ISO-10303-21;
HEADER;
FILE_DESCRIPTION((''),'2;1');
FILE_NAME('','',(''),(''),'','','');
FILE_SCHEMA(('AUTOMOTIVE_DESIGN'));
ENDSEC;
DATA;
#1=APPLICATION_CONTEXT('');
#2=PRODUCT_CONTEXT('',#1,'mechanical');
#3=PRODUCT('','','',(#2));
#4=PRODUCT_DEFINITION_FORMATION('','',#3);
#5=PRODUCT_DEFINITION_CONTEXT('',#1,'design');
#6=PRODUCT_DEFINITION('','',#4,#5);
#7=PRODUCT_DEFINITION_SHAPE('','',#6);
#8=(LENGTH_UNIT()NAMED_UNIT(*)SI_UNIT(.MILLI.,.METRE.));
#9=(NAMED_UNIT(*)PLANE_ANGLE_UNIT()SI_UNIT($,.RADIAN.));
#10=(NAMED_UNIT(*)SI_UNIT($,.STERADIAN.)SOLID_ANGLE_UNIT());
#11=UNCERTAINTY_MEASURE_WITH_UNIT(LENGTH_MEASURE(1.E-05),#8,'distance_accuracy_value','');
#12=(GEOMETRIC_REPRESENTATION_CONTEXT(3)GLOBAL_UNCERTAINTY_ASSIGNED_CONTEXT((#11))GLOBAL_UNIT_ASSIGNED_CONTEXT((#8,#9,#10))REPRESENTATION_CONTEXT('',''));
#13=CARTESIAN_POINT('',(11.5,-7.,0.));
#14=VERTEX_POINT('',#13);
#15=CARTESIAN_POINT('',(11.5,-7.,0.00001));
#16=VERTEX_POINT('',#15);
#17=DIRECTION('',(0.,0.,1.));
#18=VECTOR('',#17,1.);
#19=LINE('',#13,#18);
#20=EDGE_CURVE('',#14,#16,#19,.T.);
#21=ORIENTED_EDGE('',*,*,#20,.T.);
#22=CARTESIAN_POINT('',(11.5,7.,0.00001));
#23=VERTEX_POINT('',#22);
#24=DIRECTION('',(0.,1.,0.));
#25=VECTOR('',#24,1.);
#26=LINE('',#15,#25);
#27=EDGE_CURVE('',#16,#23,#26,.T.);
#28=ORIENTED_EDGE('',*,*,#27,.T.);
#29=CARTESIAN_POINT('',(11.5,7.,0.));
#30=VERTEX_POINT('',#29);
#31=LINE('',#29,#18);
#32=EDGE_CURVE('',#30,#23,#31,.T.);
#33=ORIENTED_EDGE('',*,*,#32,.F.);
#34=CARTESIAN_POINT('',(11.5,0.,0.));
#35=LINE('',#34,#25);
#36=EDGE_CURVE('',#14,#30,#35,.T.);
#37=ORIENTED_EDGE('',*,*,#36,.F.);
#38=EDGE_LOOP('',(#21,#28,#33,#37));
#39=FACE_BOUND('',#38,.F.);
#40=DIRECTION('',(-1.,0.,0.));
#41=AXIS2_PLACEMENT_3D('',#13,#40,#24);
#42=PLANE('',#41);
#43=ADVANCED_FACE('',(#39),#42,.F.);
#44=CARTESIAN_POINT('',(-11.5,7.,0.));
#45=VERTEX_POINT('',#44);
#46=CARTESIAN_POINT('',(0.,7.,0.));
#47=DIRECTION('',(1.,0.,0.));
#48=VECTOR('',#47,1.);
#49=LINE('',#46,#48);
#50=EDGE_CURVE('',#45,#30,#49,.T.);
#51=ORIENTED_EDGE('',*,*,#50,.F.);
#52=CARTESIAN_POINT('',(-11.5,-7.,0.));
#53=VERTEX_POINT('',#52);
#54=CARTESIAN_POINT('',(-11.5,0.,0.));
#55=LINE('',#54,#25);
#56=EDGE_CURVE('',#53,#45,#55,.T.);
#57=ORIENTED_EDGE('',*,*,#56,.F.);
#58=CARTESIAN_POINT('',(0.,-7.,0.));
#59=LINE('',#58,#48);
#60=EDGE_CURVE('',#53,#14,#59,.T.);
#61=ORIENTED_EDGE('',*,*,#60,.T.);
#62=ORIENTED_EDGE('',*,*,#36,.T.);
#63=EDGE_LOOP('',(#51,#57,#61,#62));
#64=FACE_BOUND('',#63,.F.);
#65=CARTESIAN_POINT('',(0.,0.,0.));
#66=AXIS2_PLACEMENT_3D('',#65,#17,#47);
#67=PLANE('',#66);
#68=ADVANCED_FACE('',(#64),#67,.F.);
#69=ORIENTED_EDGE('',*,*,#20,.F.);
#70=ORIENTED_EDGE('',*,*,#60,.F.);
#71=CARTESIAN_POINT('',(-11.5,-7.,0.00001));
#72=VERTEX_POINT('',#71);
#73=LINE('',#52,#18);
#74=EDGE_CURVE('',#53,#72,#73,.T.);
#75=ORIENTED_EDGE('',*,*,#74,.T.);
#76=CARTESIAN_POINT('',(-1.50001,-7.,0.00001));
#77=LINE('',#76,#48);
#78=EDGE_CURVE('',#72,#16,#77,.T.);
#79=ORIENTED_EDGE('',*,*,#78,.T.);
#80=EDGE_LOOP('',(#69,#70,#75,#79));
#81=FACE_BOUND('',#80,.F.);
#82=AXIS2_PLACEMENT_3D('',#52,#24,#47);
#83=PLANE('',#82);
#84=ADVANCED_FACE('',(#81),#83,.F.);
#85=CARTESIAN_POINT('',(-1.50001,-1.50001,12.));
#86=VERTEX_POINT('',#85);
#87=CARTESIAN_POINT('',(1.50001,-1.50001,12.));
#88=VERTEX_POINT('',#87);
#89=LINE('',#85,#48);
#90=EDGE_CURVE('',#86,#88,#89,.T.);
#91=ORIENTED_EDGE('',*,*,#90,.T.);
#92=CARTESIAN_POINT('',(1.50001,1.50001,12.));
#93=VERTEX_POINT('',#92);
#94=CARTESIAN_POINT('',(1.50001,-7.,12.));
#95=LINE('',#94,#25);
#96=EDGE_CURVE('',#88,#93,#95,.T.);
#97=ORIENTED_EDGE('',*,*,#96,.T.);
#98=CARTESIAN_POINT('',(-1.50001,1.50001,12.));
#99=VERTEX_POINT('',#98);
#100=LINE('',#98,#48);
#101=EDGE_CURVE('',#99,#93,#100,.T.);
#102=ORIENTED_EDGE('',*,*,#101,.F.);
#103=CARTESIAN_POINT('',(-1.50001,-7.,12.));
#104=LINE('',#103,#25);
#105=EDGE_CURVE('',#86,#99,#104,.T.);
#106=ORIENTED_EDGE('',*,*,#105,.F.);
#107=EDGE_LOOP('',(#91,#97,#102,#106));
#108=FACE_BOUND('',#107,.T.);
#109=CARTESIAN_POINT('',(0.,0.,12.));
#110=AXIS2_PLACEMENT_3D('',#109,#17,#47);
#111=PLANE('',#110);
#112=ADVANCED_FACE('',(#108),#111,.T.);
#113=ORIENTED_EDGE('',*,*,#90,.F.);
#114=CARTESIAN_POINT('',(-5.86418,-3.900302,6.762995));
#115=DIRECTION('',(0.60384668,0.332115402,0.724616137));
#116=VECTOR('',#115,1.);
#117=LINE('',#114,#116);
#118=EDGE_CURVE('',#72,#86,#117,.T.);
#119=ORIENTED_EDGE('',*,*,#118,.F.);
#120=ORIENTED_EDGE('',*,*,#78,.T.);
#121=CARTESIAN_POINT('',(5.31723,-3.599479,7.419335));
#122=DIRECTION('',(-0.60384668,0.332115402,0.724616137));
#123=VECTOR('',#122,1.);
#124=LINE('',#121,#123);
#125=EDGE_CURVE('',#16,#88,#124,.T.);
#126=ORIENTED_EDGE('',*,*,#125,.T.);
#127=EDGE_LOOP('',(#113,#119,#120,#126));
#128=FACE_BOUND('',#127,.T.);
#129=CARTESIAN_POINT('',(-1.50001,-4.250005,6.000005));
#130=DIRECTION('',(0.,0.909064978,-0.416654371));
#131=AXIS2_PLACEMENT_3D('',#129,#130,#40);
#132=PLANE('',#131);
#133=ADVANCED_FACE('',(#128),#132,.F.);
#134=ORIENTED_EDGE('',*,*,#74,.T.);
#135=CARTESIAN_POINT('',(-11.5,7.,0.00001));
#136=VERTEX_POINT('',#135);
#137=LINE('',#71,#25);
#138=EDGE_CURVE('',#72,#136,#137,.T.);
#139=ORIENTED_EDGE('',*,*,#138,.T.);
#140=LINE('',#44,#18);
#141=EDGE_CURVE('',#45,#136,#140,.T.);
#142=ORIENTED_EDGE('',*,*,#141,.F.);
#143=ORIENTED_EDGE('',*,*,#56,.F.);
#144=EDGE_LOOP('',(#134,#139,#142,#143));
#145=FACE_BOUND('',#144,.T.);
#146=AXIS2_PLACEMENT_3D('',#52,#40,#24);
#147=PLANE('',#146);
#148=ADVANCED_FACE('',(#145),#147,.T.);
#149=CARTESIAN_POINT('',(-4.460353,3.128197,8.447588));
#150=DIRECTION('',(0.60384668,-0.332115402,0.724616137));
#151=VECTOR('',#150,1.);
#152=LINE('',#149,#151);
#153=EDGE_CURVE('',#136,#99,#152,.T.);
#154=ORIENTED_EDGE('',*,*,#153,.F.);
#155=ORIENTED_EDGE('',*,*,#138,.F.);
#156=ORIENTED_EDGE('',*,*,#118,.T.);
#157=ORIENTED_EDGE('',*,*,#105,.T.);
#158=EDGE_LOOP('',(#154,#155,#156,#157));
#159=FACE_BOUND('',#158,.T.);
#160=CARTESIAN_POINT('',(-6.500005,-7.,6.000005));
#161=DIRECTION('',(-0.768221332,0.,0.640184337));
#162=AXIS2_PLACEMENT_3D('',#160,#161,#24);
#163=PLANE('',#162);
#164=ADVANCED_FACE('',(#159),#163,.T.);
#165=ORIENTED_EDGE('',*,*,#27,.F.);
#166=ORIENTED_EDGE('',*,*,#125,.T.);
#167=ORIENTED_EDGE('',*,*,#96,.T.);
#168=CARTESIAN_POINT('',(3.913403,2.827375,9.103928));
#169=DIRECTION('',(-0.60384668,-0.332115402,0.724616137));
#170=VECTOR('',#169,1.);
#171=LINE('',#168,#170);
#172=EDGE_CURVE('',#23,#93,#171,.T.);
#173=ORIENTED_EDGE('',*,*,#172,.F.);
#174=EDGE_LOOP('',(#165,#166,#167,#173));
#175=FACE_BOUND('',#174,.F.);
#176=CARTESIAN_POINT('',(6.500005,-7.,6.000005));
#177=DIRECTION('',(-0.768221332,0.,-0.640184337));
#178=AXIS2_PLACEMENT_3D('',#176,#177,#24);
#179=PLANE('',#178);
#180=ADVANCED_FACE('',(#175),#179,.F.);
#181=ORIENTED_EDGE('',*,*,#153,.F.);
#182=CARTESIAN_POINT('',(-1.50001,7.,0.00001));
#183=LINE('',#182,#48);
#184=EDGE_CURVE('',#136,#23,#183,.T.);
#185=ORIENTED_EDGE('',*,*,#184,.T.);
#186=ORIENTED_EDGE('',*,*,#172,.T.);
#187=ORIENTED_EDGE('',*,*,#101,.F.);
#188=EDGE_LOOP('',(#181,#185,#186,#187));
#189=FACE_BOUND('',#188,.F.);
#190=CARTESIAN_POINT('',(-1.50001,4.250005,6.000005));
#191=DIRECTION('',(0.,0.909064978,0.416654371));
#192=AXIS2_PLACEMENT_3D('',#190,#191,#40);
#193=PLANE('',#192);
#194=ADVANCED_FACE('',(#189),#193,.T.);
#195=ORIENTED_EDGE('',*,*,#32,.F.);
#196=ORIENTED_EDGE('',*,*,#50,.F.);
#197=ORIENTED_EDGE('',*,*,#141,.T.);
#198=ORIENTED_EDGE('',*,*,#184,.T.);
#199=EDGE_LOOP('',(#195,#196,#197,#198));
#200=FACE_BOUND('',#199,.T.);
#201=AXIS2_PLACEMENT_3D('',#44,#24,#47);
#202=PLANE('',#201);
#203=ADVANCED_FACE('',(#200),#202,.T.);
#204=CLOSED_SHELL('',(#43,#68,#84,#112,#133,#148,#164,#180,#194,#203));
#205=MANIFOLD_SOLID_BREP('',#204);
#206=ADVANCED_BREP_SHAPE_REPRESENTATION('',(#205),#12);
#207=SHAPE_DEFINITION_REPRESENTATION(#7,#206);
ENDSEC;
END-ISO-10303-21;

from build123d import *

# Parameters (mm, degrees)
F0_W       = 23
F0_H       = 14
F1_DEPTH   = 12
F2_SIZE2   = 11.99999
F2_SIZE    = 9.99999
F3_SIZE2   = 5.49999
F3_SIZE    = 11.99999
F3_2_SIZE2 = 5.49999
F3_2_SIZE  = 11.99999


# Not quite as in the source:
# - a fillet or chamfer is up to 0.001 mm smaller than in the source, because OpenCascade refuses the exact size


with BuildPart() as f1:
    # F0 (on Top) → F1 (new body)
    with BuildSketch(Plane.XY):
        Rectangle(F0_W, F0_H)
    extrude(amount=F1_DEPTH)

    # F2 (size 10 and 12 in the source; OpenCascade refuses exactly that, so slightly less here)
    f2_edges = [f1.edges().sort_by_distance(p)[0] for p in [
        (-11.5, 0, 12),
        (11.5, 0, 12),
    ]]
    f2_side = f1.faces().sort_by_distance((0, 0, 12))[0]
    chamfer(f2_edges, length=F2_SIZE, length2=F2_SIZE2, reference=f2_side)

    # F3 (size 12 and 5.5 in the source; OpenCascade refuses exactly that, so slightly less here)
    f3_edges = [f1.edges().sort_by_distance(p)[0] for p in [
        (0, -7, 12),
    ]]
    f3_side = f1.faces().sort_by_distance((0, -7, 4.461541))[0]
    chamfer(f3_edges, length=F3_SIZE, length2=F3_SIZE2, reference=f3_side)

    # F3#2 (size 12 and 5.5 in the source; OpenCascade refuses exactly that, so slightly less here)
    f3_2_edges = [f1.edges().sort_by_distance(p)[0] for p in [
        (0, 7, 12),
    ]]
    f3_2_side = f1.faces().sort_by_distance((0, 7, 4.461541))[0]
    chamfer(f3_2_edges, length=F3_2_SIZE, length2=F3_2_SIZE2, reference=f3_2_side)


solid = f1.part
